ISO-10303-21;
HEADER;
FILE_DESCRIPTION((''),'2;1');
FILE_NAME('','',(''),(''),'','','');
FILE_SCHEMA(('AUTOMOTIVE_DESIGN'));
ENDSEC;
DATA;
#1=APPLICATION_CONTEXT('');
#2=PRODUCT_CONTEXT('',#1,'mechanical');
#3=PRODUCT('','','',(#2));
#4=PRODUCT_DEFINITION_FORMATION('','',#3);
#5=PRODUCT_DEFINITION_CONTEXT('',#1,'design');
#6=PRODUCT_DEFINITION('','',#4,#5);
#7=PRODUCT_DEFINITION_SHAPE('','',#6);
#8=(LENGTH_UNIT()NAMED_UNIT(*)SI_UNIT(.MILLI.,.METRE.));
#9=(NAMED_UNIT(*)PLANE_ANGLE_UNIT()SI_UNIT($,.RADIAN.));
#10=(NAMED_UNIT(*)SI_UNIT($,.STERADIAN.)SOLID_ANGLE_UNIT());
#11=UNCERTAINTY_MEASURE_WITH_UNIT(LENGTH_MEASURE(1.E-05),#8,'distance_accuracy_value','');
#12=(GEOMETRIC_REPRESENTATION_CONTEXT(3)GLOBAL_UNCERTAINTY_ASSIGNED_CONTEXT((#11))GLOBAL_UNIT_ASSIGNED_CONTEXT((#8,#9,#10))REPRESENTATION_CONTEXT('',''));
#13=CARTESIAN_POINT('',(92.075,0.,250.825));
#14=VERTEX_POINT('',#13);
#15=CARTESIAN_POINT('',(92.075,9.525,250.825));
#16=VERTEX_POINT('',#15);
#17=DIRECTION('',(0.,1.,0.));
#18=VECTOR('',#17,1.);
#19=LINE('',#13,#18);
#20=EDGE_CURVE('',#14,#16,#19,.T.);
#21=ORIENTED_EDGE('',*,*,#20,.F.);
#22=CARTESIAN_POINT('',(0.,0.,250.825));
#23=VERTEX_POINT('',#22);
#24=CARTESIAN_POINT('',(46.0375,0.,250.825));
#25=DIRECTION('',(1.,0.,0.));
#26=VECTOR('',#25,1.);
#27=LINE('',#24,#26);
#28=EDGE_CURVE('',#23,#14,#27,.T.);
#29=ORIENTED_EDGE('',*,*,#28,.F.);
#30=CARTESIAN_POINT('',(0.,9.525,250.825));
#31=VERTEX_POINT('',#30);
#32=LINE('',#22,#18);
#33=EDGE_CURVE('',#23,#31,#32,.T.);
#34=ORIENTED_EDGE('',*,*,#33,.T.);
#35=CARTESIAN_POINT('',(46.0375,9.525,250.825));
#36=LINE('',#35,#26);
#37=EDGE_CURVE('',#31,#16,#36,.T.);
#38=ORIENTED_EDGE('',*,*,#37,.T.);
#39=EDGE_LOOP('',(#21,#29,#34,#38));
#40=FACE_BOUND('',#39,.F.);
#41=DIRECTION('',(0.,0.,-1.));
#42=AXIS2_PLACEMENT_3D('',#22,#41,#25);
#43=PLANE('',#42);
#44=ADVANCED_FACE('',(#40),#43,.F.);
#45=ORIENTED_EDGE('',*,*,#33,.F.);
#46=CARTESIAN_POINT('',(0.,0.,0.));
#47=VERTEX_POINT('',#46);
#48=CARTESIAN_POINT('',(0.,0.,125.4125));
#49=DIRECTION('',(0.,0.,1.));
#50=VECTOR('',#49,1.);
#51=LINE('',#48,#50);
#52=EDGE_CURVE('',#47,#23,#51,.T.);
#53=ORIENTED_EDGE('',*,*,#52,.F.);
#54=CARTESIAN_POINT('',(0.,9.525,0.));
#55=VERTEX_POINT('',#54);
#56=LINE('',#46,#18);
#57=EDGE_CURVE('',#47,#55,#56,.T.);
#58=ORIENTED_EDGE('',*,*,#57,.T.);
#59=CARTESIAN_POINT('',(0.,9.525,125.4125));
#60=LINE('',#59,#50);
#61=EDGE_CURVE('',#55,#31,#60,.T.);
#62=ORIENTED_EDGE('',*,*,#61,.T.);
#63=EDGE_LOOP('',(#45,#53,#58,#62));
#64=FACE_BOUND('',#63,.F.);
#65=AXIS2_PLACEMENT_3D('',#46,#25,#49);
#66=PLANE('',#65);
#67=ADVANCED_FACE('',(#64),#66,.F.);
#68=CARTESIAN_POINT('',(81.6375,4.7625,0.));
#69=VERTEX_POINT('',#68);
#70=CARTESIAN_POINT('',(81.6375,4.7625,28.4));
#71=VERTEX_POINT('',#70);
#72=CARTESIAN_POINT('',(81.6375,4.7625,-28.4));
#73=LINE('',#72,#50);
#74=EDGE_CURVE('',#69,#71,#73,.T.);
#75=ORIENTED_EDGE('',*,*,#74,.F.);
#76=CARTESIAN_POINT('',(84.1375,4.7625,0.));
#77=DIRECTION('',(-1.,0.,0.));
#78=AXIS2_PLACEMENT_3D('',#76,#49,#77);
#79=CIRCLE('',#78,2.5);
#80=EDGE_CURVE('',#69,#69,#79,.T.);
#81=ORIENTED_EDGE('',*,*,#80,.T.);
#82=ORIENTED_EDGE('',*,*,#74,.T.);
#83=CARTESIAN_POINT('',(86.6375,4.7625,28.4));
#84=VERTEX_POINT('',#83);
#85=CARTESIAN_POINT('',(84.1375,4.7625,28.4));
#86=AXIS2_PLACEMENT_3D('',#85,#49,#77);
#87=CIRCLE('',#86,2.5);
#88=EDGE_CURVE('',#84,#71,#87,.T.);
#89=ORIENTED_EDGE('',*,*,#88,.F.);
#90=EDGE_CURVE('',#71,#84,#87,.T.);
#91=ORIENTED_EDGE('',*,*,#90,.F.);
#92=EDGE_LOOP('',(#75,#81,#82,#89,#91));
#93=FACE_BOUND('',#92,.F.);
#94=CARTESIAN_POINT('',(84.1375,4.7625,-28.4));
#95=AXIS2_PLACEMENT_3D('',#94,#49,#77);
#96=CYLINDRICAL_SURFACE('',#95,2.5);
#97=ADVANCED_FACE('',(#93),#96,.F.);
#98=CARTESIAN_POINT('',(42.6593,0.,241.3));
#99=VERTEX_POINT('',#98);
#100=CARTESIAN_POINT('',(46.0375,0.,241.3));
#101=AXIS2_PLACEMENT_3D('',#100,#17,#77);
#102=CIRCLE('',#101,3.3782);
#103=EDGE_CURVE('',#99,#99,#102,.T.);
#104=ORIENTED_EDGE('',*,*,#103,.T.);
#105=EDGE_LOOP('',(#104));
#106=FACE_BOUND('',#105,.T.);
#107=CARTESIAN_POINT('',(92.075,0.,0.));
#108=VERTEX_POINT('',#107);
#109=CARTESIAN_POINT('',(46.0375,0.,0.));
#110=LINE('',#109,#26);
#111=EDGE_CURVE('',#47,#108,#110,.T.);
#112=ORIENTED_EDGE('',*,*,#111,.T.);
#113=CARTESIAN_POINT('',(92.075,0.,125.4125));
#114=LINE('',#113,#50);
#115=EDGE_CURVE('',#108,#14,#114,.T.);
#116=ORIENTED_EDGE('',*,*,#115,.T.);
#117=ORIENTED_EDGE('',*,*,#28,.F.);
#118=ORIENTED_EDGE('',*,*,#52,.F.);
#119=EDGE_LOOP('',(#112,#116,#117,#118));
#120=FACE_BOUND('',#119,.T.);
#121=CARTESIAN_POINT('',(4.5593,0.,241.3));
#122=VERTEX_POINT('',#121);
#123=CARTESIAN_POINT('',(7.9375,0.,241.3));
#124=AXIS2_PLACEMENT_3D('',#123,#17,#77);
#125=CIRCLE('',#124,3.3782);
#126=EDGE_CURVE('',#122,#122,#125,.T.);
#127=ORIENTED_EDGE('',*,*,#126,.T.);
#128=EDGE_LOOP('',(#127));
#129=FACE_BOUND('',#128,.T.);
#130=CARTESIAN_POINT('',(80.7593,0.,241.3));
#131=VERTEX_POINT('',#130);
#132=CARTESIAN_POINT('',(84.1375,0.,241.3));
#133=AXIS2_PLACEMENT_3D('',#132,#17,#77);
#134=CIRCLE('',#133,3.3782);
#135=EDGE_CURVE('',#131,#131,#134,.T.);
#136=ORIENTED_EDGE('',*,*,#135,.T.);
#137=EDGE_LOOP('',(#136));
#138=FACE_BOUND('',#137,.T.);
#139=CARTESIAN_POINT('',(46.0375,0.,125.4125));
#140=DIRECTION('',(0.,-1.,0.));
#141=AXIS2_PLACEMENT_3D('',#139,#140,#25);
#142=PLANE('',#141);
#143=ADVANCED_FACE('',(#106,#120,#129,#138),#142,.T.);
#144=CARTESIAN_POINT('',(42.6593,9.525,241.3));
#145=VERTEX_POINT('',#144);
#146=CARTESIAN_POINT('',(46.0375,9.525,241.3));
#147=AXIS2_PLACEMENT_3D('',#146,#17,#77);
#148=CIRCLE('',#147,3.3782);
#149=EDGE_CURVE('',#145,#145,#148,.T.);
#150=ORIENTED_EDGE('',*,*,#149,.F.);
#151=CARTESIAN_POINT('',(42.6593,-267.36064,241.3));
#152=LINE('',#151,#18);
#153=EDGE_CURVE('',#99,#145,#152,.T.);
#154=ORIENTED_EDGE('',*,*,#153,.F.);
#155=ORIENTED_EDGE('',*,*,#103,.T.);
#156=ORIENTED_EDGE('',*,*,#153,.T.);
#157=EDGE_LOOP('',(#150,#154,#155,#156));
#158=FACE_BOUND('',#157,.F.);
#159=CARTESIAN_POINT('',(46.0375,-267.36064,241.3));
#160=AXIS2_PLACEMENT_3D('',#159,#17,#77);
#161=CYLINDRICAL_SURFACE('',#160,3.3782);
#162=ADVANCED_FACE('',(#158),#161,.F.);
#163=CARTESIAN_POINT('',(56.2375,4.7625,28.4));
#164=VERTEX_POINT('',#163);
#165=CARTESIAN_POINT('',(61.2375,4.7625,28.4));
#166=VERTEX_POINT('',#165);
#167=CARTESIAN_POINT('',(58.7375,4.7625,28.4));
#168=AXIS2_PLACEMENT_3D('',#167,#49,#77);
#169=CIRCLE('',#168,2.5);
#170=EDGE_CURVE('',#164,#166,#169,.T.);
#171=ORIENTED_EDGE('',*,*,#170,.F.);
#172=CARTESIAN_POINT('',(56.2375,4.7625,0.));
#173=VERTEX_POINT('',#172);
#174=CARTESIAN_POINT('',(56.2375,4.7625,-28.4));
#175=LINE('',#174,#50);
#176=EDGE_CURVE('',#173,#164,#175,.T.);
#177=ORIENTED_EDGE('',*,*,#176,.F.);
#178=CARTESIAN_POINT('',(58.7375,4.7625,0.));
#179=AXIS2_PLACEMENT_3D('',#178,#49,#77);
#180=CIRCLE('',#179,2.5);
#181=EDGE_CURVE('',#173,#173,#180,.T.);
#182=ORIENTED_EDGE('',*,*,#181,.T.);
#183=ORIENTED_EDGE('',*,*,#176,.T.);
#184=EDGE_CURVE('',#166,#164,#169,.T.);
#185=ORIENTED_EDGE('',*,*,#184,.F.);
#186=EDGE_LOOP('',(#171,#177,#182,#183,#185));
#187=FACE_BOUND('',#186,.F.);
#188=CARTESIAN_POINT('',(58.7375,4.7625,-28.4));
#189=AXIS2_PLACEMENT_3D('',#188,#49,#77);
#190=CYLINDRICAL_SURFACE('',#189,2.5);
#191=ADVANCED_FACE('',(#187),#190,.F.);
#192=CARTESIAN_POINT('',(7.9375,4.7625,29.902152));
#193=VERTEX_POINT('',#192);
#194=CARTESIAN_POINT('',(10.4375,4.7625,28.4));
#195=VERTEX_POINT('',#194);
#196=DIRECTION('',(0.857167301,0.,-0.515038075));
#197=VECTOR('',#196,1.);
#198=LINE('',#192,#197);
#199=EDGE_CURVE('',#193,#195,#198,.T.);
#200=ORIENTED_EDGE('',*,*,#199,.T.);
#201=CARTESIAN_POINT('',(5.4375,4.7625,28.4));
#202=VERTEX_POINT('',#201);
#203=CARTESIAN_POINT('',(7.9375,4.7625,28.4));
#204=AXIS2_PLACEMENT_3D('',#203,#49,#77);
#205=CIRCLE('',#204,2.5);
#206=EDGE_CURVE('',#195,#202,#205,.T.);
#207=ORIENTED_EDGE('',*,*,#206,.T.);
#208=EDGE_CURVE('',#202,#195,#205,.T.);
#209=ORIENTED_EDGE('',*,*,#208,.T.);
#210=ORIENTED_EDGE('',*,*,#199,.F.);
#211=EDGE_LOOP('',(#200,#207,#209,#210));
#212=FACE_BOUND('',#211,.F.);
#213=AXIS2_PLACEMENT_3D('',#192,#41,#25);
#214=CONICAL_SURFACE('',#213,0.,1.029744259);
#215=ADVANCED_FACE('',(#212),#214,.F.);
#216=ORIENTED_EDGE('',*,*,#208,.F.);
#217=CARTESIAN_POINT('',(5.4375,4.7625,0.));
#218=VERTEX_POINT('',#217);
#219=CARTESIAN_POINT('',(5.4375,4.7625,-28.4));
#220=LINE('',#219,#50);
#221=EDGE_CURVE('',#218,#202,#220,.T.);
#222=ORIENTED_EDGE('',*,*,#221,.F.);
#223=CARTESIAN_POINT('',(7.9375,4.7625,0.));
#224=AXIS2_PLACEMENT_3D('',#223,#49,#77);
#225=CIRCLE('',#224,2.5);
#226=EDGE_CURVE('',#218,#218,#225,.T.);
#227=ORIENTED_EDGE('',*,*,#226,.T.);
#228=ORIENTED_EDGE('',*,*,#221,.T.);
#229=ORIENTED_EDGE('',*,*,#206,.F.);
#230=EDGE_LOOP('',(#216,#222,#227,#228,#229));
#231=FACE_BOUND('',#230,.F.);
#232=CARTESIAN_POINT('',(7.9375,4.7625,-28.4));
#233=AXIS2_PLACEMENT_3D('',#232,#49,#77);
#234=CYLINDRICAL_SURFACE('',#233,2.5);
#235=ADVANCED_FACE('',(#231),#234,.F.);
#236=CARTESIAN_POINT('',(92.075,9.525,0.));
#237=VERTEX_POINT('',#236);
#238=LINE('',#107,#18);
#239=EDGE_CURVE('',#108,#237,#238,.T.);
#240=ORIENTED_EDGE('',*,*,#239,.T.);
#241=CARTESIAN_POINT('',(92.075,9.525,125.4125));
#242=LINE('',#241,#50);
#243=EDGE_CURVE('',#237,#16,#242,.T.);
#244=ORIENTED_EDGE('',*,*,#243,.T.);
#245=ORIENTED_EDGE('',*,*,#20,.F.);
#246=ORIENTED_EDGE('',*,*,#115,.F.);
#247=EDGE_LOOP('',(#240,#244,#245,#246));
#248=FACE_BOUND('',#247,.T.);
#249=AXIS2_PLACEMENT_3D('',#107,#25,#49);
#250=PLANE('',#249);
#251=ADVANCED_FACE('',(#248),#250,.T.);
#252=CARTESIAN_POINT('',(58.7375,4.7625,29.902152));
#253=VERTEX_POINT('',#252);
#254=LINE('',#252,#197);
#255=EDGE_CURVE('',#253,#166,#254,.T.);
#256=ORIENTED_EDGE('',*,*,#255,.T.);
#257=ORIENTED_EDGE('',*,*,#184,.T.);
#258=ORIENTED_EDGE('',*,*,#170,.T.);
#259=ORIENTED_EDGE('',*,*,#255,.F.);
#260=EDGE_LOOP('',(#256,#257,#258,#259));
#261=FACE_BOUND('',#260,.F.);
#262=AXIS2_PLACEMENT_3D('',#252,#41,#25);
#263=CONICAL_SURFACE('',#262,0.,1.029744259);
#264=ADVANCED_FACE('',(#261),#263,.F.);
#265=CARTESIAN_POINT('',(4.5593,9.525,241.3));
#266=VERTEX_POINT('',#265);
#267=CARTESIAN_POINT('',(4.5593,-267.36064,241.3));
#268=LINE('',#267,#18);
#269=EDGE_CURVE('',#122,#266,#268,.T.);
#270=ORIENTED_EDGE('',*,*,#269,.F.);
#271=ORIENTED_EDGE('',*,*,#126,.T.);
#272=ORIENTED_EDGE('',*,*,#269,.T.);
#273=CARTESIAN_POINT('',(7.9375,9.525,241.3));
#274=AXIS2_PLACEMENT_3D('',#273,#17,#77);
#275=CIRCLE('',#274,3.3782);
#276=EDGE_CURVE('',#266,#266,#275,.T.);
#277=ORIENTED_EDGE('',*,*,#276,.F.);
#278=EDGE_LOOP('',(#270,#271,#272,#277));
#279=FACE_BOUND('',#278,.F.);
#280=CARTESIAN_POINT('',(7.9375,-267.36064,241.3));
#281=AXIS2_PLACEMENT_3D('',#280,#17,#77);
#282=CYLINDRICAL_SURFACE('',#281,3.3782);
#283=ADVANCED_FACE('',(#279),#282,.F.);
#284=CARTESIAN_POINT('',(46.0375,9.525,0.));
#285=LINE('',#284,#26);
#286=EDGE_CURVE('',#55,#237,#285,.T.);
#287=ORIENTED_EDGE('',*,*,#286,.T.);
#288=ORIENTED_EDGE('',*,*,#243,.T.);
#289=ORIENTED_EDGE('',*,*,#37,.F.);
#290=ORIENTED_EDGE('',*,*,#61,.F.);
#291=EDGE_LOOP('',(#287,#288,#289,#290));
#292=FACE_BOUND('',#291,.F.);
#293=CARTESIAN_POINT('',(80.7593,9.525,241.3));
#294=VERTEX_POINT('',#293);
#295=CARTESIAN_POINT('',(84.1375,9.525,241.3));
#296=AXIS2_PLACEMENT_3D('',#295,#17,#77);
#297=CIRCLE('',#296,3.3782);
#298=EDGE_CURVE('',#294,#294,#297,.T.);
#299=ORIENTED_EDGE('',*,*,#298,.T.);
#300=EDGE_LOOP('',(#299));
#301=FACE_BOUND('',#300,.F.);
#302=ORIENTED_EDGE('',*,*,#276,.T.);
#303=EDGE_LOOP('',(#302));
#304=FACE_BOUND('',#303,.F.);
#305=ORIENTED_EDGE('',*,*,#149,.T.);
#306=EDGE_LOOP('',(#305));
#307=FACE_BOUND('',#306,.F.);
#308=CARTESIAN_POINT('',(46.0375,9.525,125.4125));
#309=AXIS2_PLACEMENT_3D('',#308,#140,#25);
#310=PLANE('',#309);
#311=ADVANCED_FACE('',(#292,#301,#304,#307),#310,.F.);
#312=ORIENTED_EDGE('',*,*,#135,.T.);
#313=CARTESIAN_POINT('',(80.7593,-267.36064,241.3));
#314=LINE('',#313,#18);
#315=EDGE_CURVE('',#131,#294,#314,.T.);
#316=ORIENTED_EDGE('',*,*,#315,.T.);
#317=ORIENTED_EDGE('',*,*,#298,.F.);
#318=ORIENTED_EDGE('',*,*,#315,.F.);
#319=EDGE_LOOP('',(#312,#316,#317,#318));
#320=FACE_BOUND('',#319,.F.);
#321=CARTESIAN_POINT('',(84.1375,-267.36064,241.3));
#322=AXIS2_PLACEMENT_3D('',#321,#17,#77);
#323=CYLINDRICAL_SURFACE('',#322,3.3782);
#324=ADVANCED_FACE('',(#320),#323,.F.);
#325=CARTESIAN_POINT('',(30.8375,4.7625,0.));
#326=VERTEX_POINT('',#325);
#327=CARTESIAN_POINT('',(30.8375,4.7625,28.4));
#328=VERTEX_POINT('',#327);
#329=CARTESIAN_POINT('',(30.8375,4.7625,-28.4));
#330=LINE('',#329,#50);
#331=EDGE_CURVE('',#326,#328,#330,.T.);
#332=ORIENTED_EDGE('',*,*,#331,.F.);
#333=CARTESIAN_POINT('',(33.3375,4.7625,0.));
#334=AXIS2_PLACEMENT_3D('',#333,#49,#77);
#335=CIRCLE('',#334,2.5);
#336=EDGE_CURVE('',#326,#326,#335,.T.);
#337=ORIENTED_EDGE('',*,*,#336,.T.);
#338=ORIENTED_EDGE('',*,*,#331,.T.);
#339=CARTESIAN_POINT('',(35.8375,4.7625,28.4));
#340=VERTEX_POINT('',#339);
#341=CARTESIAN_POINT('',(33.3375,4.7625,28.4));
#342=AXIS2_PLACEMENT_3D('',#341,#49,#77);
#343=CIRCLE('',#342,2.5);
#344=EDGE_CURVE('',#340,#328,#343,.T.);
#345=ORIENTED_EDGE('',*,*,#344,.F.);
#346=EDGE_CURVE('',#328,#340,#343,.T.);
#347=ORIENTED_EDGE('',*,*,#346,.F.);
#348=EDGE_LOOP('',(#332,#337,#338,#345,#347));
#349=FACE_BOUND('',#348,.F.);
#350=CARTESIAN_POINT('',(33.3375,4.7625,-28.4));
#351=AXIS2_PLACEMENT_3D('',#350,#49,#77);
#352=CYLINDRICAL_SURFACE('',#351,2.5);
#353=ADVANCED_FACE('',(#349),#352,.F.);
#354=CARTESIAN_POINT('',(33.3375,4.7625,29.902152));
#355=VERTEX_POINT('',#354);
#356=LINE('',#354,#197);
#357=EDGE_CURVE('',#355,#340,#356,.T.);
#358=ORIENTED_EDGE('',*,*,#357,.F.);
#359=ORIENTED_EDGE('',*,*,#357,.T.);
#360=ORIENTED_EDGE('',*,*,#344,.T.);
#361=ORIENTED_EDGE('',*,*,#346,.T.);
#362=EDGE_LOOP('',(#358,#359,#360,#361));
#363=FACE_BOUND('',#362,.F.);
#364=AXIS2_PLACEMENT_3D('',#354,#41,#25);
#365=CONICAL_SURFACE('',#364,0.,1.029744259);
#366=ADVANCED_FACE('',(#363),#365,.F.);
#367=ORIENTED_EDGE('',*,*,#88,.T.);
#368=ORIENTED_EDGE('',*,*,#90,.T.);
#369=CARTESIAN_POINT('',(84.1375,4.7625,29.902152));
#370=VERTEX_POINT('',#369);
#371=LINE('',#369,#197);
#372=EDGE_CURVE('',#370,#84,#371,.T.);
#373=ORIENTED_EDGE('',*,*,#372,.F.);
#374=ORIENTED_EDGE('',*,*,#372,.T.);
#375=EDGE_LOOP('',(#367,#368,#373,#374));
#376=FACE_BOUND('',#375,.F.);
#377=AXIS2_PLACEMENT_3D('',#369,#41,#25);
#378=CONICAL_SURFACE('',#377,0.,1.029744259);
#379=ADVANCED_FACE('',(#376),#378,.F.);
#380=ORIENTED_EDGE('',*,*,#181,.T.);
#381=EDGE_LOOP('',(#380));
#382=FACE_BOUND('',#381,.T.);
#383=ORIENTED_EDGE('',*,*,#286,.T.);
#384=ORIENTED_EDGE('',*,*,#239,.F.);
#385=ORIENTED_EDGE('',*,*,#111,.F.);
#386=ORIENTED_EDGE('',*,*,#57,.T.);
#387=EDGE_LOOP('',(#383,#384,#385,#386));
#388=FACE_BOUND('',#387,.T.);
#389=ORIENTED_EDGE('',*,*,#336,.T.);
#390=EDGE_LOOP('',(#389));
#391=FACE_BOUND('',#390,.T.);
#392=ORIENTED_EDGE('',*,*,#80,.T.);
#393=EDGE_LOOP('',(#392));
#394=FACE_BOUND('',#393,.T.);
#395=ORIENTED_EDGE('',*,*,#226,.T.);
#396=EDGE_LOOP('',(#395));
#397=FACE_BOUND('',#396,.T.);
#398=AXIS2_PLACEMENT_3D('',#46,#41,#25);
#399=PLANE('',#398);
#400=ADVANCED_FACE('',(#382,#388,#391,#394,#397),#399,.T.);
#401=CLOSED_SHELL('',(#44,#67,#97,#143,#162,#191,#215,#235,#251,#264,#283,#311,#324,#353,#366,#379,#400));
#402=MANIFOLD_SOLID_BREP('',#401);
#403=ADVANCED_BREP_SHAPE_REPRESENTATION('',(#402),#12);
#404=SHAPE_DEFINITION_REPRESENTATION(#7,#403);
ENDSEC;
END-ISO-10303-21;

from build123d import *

# Parameters (mm, degrees)
F0_W     = 92.075
F0_H     = 250.825
F1_DEPTH = 9.525
F3_D     = 6.7564
F5_D     = 5
F5_DEPTH = 28.4
F5_TIP   = 1.5021515476


# Not quite as in the source:
# - a feature names something its author has since deleted; it is built from what else it names


with BuildPart() as f1:
    # F0 (on Front) → F1 (new body)
    with BuildSketch(Plane.XZ):
        with Locations((46.0375, 125.4125)):
            Rectangle(F0_W, F0_H)
    extrude(amount=-F1_DEPTH)

    # F3 (through all)
    with Locations(Plane.XZ):
        with Locations((46.0375, 241.3), (84.1375, 241.3), (7.9375, 241.3)):
            Hole(F3_D / 2)

    # F5
    with Locations(Plane(origin=(0, 0, 0), x_dir=(1, 0, 0), z_dir=(0, 0, -1))):
        with Locations((7.9375, -4.7625), (33.3375, -4.7625), (58.7375, -4.7625), (84.1375, -4.7625), (109.5375, -4.7625), (134.9375, -4.7625)):
            Hole(F5_D / 2, depth=F5_DEPTH)
            with Locations((0, 0, -(F5_DEPTH + F5_TIP / 2))):  # 118° drill point
                Cone(0, F5_D / 2, F5_TIP, mode=Mode.SUBTRACT)


solid = f1.part
